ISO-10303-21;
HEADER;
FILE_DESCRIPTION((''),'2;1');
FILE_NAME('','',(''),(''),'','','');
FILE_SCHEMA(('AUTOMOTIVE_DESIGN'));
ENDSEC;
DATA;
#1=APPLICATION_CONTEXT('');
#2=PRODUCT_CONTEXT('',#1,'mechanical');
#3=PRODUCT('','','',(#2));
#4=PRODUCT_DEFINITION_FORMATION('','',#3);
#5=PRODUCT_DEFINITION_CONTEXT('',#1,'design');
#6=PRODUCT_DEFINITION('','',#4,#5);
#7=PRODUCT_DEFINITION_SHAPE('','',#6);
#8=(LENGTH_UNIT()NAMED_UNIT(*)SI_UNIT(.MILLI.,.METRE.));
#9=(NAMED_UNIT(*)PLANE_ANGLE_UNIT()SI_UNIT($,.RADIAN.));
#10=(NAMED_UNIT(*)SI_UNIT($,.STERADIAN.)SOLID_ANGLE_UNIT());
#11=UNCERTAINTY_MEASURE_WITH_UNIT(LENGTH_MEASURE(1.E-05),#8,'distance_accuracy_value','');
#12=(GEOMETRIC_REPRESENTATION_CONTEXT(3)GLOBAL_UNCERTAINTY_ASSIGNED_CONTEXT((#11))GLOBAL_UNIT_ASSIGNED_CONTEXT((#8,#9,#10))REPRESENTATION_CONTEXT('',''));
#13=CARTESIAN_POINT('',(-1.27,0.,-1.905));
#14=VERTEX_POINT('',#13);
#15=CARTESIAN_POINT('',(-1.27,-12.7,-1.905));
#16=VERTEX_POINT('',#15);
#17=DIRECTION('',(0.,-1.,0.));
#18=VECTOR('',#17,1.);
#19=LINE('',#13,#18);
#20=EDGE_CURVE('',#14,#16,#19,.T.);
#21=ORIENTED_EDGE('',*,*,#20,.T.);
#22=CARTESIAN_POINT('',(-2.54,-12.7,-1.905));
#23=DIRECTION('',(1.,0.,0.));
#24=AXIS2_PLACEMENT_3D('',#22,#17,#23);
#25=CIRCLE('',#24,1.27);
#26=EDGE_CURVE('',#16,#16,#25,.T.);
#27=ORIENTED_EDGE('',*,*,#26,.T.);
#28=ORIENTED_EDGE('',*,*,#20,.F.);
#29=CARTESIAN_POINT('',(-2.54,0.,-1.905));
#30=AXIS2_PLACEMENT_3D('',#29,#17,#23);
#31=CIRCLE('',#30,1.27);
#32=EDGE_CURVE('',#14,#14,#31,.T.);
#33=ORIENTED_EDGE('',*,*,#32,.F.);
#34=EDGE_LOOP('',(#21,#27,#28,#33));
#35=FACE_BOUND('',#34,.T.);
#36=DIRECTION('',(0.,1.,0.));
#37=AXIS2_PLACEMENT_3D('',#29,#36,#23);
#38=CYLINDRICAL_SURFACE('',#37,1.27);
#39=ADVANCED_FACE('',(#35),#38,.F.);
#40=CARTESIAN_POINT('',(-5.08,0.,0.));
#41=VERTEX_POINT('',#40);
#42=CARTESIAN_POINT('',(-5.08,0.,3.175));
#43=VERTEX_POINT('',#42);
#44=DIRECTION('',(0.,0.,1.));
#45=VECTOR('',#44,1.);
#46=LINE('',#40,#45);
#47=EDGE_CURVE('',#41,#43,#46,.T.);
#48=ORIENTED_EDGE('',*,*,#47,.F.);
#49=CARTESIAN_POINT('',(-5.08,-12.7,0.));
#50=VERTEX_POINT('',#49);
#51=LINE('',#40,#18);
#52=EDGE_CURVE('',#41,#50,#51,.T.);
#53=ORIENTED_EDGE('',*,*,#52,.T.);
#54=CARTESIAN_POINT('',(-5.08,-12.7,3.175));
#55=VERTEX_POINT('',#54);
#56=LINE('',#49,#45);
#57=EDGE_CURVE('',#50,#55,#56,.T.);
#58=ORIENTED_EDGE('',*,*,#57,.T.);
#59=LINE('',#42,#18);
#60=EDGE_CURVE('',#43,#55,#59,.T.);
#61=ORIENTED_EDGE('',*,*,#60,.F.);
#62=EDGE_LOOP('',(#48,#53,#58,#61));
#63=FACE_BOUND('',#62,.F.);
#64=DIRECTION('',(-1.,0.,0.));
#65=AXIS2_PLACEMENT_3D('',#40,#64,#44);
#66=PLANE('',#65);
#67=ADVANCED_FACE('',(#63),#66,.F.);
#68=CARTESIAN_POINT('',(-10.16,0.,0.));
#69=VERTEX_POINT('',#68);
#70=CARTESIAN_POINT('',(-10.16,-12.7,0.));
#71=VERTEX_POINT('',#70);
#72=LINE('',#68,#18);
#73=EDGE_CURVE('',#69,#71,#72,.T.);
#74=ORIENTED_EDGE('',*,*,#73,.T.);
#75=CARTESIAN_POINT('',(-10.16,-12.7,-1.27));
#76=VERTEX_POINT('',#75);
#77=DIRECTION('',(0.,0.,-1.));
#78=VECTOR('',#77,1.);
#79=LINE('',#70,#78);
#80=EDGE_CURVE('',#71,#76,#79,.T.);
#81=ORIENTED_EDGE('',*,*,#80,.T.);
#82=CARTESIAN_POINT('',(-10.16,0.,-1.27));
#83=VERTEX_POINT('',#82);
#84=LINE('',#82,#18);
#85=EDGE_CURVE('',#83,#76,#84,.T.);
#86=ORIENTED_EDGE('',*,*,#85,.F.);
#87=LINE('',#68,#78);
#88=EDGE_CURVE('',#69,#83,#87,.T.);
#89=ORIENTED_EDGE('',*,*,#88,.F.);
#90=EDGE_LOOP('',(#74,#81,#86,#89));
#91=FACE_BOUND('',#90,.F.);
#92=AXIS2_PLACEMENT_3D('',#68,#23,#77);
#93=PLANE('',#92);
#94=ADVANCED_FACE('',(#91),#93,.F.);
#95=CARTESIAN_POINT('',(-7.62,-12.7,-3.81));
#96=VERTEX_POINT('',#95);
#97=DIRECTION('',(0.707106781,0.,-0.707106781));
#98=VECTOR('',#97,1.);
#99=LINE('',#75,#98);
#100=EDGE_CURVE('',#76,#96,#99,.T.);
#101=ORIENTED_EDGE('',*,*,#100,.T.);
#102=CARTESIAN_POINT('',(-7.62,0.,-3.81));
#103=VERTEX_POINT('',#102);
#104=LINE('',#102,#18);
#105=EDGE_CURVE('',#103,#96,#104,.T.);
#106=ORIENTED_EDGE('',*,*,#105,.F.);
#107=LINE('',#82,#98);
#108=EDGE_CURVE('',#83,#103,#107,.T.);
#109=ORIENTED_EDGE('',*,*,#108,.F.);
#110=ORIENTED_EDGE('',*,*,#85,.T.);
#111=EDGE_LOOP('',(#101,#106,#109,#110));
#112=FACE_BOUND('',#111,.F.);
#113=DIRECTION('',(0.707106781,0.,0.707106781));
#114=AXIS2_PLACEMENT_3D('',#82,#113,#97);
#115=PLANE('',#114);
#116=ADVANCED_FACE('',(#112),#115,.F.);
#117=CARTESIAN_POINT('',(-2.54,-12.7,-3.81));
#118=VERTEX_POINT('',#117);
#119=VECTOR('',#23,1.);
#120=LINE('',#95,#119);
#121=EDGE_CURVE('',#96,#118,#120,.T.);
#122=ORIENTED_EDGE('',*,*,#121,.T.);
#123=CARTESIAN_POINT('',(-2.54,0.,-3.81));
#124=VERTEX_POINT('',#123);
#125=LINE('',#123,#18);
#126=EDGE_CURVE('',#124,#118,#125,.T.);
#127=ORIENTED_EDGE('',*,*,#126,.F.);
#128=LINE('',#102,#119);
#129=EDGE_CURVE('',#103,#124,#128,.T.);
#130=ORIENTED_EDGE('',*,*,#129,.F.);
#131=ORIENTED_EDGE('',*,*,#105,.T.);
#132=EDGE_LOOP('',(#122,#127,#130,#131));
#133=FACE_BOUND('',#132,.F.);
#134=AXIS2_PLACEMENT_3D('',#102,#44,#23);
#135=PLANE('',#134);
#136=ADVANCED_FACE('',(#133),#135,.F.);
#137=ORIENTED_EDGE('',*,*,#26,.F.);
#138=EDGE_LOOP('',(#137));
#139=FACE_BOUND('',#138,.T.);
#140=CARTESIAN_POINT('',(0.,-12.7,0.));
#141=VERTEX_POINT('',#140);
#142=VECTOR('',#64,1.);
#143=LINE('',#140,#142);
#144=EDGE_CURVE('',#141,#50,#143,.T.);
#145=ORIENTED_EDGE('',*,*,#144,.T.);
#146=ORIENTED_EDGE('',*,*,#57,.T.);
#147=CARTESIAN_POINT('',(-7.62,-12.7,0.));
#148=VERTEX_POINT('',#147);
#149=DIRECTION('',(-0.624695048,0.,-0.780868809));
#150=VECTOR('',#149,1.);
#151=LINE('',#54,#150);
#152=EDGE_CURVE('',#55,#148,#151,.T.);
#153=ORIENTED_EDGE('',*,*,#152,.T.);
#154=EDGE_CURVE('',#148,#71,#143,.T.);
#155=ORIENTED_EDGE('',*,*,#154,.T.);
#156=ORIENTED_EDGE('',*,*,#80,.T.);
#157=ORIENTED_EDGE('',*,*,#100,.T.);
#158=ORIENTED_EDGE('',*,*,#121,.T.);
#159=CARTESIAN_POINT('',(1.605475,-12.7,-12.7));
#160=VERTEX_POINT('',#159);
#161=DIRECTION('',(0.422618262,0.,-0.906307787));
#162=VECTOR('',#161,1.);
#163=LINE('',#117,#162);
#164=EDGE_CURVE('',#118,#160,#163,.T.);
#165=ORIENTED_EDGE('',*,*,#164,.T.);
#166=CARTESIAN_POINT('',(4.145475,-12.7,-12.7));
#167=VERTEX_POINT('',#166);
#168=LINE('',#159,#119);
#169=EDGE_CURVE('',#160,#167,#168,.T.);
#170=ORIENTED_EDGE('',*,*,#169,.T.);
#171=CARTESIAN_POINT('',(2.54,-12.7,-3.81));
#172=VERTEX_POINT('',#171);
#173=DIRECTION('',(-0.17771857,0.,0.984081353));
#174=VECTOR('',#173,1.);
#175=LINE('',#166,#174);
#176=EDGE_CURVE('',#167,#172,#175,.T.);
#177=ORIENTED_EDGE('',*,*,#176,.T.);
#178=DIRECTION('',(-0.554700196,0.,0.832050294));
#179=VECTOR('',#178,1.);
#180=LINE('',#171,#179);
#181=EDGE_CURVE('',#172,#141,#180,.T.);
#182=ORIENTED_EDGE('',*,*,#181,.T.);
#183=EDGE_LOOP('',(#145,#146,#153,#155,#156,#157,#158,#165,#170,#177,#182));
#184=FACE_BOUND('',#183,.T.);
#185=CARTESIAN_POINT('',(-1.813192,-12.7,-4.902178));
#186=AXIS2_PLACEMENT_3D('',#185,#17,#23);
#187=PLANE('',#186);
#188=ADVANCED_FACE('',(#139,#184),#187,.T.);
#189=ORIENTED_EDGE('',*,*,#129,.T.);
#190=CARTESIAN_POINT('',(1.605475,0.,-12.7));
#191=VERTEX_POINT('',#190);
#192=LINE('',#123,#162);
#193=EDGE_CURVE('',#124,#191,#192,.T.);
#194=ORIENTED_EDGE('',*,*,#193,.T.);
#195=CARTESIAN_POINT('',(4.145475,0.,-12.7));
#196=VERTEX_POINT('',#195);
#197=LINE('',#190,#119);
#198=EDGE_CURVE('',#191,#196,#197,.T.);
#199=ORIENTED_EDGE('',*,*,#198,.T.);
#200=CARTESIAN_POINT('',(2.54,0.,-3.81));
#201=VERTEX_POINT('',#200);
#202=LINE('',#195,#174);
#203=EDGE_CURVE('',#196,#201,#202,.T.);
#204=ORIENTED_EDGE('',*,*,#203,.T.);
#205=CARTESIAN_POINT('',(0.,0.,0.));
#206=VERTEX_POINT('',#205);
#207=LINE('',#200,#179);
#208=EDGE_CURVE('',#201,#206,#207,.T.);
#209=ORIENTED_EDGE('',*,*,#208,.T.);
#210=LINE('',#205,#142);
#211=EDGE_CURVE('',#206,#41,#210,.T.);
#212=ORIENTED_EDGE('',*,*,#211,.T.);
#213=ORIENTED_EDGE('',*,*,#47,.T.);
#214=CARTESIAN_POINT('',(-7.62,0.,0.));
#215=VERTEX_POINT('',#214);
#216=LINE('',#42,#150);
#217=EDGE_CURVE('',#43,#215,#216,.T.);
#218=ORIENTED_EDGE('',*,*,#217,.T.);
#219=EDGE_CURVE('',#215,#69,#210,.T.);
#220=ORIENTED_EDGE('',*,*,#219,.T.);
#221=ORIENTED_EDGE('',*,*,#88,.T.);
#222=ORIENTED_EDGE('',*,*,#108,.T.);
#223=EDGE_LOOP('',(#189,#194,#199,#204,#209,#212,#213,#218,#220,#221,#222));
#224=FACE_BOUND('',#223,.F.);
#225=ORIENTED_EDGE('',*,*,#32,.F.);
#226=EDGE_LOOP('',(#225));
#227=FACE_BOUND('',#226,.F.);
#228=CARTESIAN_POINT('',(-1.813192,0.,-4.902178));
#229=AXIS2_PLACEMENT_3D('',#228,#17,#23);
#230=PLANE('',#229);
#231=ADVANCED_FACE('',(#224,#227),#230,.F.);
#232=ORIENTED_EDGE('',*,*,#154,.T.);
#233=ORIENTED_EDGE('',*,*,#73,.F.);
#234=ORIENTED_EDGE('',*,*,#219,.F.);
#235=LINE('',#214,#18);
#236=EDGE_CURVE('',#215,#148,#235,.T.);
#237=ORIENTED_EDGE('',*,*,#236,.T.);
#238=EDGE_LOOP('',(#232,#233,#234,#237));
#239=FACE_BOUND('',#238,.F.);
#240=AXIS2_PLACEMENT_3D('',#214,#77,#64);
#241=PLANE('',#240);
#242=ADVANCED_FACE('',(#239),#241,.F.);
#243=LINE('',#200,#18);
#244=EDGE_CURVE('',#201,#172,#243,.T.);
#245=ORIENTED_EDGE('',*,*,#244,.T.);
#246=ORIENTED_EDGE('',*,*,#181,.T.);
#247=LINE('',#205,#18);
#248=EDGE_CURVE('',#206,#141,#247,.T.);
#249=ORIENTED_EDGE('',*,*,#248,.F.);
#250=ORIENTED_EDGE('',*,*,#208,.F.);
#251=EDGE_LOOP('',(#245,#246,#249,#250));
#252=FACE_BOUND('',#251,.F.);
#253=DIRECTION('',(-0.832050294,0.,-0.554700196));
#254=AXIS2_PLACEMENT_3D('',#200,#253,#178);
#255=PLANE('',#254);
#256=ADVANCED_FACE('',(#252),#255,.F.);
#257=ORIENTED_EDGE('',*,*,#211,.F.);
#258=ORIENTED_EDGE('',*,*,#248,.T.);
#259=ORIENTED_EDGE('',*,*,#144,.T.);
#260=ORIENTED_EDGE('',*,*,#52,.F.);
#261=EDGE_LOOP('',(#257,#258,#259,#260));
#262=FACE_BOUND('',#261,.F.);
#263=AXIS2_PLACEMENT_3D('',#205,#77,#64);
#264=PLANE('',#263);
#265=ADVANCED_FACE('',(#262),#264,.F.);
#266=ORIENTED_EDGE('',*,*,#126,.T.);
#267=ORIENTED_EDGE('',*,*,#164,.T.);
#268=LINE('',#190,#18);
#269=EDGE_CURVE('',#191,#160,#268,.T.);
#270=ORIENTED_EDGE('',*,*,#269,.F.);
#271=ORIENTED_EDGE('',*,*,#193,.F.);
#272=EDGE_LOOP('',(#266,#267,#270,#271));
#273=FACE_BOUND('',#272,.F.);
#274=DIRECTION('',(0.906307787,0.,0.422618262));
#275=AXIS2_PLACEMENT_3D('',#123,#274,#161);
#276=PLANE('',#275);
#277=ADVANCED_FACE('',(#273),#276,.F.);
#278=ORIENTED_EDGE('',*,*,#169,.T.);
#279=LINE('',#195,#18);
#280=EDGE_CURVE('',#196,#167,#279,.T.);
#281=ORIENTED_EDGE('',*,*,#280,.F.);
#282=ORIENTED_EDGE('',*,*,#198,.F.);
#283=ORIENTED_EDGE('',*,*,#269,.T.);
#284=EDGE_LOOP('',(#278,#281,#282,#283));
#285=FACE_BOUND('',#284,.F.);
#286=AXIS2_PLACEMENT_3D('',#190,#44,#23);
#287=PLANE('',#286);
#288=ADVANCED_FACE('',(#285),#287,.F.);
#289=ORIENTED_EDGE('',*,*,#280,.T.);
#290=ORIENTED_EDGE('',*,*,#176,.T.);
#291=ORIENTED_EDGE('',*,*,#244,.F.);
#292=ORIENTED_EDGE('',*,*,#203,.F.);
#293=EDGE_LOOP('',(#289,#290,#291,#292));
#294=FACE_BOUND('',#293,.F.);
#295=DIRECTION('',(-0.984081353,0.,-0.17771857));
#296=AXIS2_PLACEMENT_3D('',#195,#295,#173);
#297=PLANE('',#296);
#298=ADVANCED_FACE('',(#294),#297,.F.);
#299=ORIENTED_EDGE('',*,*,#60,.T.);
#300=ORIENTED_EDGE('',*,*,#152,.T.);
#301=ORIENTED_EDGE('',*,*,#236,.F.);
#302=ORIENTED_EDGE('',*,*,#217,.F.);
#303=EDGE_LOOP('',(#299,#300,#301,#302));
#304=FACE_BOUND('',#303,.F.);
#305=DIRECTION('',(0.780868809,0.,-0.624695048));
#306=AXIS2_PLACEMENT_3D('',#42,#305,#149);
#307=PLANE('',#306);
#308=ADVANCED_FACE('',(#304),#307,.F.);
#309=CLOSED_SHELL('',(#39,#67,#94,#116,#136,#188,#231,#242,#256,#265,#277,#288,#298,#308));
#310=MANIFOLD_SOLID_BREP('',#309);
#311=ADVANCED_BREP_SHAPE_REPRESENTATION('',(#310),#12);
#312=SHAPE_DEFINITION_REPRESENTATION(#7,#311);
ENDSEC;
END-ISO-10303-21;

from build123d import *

# Parameters (mm, degrees)
F0_R     = 1.27
F1_DEPTH = 12.7


# Not quite as in the source:
# - a feature names something its author has since deleted; it is built from what else it names


with BuildPart() as f1:
    # F0 (on Front) → F1 (new body)
    with BuildSketch(Plane.XZ):
        Polygon((2.54, -3.81), (0, 0), (-5.08, 0), (-7.62, 0), (-10.16, 0), (-10.16, -1.27), (-7.62, -3.81), (-2.54, -3.81), (1.605475081, -12.7), (4.145475081, -12.7), align=None)
        with Locations((-2.54, -1.905)):
            Circle(F0_R, mode=Mode.SUBTRACT)
        Polygon((-7.62, 0), (-5.08, 0), (-5.08, 3.175), align=None)
    extrude(amount=F1_DEPTH)


solid = f1.part
